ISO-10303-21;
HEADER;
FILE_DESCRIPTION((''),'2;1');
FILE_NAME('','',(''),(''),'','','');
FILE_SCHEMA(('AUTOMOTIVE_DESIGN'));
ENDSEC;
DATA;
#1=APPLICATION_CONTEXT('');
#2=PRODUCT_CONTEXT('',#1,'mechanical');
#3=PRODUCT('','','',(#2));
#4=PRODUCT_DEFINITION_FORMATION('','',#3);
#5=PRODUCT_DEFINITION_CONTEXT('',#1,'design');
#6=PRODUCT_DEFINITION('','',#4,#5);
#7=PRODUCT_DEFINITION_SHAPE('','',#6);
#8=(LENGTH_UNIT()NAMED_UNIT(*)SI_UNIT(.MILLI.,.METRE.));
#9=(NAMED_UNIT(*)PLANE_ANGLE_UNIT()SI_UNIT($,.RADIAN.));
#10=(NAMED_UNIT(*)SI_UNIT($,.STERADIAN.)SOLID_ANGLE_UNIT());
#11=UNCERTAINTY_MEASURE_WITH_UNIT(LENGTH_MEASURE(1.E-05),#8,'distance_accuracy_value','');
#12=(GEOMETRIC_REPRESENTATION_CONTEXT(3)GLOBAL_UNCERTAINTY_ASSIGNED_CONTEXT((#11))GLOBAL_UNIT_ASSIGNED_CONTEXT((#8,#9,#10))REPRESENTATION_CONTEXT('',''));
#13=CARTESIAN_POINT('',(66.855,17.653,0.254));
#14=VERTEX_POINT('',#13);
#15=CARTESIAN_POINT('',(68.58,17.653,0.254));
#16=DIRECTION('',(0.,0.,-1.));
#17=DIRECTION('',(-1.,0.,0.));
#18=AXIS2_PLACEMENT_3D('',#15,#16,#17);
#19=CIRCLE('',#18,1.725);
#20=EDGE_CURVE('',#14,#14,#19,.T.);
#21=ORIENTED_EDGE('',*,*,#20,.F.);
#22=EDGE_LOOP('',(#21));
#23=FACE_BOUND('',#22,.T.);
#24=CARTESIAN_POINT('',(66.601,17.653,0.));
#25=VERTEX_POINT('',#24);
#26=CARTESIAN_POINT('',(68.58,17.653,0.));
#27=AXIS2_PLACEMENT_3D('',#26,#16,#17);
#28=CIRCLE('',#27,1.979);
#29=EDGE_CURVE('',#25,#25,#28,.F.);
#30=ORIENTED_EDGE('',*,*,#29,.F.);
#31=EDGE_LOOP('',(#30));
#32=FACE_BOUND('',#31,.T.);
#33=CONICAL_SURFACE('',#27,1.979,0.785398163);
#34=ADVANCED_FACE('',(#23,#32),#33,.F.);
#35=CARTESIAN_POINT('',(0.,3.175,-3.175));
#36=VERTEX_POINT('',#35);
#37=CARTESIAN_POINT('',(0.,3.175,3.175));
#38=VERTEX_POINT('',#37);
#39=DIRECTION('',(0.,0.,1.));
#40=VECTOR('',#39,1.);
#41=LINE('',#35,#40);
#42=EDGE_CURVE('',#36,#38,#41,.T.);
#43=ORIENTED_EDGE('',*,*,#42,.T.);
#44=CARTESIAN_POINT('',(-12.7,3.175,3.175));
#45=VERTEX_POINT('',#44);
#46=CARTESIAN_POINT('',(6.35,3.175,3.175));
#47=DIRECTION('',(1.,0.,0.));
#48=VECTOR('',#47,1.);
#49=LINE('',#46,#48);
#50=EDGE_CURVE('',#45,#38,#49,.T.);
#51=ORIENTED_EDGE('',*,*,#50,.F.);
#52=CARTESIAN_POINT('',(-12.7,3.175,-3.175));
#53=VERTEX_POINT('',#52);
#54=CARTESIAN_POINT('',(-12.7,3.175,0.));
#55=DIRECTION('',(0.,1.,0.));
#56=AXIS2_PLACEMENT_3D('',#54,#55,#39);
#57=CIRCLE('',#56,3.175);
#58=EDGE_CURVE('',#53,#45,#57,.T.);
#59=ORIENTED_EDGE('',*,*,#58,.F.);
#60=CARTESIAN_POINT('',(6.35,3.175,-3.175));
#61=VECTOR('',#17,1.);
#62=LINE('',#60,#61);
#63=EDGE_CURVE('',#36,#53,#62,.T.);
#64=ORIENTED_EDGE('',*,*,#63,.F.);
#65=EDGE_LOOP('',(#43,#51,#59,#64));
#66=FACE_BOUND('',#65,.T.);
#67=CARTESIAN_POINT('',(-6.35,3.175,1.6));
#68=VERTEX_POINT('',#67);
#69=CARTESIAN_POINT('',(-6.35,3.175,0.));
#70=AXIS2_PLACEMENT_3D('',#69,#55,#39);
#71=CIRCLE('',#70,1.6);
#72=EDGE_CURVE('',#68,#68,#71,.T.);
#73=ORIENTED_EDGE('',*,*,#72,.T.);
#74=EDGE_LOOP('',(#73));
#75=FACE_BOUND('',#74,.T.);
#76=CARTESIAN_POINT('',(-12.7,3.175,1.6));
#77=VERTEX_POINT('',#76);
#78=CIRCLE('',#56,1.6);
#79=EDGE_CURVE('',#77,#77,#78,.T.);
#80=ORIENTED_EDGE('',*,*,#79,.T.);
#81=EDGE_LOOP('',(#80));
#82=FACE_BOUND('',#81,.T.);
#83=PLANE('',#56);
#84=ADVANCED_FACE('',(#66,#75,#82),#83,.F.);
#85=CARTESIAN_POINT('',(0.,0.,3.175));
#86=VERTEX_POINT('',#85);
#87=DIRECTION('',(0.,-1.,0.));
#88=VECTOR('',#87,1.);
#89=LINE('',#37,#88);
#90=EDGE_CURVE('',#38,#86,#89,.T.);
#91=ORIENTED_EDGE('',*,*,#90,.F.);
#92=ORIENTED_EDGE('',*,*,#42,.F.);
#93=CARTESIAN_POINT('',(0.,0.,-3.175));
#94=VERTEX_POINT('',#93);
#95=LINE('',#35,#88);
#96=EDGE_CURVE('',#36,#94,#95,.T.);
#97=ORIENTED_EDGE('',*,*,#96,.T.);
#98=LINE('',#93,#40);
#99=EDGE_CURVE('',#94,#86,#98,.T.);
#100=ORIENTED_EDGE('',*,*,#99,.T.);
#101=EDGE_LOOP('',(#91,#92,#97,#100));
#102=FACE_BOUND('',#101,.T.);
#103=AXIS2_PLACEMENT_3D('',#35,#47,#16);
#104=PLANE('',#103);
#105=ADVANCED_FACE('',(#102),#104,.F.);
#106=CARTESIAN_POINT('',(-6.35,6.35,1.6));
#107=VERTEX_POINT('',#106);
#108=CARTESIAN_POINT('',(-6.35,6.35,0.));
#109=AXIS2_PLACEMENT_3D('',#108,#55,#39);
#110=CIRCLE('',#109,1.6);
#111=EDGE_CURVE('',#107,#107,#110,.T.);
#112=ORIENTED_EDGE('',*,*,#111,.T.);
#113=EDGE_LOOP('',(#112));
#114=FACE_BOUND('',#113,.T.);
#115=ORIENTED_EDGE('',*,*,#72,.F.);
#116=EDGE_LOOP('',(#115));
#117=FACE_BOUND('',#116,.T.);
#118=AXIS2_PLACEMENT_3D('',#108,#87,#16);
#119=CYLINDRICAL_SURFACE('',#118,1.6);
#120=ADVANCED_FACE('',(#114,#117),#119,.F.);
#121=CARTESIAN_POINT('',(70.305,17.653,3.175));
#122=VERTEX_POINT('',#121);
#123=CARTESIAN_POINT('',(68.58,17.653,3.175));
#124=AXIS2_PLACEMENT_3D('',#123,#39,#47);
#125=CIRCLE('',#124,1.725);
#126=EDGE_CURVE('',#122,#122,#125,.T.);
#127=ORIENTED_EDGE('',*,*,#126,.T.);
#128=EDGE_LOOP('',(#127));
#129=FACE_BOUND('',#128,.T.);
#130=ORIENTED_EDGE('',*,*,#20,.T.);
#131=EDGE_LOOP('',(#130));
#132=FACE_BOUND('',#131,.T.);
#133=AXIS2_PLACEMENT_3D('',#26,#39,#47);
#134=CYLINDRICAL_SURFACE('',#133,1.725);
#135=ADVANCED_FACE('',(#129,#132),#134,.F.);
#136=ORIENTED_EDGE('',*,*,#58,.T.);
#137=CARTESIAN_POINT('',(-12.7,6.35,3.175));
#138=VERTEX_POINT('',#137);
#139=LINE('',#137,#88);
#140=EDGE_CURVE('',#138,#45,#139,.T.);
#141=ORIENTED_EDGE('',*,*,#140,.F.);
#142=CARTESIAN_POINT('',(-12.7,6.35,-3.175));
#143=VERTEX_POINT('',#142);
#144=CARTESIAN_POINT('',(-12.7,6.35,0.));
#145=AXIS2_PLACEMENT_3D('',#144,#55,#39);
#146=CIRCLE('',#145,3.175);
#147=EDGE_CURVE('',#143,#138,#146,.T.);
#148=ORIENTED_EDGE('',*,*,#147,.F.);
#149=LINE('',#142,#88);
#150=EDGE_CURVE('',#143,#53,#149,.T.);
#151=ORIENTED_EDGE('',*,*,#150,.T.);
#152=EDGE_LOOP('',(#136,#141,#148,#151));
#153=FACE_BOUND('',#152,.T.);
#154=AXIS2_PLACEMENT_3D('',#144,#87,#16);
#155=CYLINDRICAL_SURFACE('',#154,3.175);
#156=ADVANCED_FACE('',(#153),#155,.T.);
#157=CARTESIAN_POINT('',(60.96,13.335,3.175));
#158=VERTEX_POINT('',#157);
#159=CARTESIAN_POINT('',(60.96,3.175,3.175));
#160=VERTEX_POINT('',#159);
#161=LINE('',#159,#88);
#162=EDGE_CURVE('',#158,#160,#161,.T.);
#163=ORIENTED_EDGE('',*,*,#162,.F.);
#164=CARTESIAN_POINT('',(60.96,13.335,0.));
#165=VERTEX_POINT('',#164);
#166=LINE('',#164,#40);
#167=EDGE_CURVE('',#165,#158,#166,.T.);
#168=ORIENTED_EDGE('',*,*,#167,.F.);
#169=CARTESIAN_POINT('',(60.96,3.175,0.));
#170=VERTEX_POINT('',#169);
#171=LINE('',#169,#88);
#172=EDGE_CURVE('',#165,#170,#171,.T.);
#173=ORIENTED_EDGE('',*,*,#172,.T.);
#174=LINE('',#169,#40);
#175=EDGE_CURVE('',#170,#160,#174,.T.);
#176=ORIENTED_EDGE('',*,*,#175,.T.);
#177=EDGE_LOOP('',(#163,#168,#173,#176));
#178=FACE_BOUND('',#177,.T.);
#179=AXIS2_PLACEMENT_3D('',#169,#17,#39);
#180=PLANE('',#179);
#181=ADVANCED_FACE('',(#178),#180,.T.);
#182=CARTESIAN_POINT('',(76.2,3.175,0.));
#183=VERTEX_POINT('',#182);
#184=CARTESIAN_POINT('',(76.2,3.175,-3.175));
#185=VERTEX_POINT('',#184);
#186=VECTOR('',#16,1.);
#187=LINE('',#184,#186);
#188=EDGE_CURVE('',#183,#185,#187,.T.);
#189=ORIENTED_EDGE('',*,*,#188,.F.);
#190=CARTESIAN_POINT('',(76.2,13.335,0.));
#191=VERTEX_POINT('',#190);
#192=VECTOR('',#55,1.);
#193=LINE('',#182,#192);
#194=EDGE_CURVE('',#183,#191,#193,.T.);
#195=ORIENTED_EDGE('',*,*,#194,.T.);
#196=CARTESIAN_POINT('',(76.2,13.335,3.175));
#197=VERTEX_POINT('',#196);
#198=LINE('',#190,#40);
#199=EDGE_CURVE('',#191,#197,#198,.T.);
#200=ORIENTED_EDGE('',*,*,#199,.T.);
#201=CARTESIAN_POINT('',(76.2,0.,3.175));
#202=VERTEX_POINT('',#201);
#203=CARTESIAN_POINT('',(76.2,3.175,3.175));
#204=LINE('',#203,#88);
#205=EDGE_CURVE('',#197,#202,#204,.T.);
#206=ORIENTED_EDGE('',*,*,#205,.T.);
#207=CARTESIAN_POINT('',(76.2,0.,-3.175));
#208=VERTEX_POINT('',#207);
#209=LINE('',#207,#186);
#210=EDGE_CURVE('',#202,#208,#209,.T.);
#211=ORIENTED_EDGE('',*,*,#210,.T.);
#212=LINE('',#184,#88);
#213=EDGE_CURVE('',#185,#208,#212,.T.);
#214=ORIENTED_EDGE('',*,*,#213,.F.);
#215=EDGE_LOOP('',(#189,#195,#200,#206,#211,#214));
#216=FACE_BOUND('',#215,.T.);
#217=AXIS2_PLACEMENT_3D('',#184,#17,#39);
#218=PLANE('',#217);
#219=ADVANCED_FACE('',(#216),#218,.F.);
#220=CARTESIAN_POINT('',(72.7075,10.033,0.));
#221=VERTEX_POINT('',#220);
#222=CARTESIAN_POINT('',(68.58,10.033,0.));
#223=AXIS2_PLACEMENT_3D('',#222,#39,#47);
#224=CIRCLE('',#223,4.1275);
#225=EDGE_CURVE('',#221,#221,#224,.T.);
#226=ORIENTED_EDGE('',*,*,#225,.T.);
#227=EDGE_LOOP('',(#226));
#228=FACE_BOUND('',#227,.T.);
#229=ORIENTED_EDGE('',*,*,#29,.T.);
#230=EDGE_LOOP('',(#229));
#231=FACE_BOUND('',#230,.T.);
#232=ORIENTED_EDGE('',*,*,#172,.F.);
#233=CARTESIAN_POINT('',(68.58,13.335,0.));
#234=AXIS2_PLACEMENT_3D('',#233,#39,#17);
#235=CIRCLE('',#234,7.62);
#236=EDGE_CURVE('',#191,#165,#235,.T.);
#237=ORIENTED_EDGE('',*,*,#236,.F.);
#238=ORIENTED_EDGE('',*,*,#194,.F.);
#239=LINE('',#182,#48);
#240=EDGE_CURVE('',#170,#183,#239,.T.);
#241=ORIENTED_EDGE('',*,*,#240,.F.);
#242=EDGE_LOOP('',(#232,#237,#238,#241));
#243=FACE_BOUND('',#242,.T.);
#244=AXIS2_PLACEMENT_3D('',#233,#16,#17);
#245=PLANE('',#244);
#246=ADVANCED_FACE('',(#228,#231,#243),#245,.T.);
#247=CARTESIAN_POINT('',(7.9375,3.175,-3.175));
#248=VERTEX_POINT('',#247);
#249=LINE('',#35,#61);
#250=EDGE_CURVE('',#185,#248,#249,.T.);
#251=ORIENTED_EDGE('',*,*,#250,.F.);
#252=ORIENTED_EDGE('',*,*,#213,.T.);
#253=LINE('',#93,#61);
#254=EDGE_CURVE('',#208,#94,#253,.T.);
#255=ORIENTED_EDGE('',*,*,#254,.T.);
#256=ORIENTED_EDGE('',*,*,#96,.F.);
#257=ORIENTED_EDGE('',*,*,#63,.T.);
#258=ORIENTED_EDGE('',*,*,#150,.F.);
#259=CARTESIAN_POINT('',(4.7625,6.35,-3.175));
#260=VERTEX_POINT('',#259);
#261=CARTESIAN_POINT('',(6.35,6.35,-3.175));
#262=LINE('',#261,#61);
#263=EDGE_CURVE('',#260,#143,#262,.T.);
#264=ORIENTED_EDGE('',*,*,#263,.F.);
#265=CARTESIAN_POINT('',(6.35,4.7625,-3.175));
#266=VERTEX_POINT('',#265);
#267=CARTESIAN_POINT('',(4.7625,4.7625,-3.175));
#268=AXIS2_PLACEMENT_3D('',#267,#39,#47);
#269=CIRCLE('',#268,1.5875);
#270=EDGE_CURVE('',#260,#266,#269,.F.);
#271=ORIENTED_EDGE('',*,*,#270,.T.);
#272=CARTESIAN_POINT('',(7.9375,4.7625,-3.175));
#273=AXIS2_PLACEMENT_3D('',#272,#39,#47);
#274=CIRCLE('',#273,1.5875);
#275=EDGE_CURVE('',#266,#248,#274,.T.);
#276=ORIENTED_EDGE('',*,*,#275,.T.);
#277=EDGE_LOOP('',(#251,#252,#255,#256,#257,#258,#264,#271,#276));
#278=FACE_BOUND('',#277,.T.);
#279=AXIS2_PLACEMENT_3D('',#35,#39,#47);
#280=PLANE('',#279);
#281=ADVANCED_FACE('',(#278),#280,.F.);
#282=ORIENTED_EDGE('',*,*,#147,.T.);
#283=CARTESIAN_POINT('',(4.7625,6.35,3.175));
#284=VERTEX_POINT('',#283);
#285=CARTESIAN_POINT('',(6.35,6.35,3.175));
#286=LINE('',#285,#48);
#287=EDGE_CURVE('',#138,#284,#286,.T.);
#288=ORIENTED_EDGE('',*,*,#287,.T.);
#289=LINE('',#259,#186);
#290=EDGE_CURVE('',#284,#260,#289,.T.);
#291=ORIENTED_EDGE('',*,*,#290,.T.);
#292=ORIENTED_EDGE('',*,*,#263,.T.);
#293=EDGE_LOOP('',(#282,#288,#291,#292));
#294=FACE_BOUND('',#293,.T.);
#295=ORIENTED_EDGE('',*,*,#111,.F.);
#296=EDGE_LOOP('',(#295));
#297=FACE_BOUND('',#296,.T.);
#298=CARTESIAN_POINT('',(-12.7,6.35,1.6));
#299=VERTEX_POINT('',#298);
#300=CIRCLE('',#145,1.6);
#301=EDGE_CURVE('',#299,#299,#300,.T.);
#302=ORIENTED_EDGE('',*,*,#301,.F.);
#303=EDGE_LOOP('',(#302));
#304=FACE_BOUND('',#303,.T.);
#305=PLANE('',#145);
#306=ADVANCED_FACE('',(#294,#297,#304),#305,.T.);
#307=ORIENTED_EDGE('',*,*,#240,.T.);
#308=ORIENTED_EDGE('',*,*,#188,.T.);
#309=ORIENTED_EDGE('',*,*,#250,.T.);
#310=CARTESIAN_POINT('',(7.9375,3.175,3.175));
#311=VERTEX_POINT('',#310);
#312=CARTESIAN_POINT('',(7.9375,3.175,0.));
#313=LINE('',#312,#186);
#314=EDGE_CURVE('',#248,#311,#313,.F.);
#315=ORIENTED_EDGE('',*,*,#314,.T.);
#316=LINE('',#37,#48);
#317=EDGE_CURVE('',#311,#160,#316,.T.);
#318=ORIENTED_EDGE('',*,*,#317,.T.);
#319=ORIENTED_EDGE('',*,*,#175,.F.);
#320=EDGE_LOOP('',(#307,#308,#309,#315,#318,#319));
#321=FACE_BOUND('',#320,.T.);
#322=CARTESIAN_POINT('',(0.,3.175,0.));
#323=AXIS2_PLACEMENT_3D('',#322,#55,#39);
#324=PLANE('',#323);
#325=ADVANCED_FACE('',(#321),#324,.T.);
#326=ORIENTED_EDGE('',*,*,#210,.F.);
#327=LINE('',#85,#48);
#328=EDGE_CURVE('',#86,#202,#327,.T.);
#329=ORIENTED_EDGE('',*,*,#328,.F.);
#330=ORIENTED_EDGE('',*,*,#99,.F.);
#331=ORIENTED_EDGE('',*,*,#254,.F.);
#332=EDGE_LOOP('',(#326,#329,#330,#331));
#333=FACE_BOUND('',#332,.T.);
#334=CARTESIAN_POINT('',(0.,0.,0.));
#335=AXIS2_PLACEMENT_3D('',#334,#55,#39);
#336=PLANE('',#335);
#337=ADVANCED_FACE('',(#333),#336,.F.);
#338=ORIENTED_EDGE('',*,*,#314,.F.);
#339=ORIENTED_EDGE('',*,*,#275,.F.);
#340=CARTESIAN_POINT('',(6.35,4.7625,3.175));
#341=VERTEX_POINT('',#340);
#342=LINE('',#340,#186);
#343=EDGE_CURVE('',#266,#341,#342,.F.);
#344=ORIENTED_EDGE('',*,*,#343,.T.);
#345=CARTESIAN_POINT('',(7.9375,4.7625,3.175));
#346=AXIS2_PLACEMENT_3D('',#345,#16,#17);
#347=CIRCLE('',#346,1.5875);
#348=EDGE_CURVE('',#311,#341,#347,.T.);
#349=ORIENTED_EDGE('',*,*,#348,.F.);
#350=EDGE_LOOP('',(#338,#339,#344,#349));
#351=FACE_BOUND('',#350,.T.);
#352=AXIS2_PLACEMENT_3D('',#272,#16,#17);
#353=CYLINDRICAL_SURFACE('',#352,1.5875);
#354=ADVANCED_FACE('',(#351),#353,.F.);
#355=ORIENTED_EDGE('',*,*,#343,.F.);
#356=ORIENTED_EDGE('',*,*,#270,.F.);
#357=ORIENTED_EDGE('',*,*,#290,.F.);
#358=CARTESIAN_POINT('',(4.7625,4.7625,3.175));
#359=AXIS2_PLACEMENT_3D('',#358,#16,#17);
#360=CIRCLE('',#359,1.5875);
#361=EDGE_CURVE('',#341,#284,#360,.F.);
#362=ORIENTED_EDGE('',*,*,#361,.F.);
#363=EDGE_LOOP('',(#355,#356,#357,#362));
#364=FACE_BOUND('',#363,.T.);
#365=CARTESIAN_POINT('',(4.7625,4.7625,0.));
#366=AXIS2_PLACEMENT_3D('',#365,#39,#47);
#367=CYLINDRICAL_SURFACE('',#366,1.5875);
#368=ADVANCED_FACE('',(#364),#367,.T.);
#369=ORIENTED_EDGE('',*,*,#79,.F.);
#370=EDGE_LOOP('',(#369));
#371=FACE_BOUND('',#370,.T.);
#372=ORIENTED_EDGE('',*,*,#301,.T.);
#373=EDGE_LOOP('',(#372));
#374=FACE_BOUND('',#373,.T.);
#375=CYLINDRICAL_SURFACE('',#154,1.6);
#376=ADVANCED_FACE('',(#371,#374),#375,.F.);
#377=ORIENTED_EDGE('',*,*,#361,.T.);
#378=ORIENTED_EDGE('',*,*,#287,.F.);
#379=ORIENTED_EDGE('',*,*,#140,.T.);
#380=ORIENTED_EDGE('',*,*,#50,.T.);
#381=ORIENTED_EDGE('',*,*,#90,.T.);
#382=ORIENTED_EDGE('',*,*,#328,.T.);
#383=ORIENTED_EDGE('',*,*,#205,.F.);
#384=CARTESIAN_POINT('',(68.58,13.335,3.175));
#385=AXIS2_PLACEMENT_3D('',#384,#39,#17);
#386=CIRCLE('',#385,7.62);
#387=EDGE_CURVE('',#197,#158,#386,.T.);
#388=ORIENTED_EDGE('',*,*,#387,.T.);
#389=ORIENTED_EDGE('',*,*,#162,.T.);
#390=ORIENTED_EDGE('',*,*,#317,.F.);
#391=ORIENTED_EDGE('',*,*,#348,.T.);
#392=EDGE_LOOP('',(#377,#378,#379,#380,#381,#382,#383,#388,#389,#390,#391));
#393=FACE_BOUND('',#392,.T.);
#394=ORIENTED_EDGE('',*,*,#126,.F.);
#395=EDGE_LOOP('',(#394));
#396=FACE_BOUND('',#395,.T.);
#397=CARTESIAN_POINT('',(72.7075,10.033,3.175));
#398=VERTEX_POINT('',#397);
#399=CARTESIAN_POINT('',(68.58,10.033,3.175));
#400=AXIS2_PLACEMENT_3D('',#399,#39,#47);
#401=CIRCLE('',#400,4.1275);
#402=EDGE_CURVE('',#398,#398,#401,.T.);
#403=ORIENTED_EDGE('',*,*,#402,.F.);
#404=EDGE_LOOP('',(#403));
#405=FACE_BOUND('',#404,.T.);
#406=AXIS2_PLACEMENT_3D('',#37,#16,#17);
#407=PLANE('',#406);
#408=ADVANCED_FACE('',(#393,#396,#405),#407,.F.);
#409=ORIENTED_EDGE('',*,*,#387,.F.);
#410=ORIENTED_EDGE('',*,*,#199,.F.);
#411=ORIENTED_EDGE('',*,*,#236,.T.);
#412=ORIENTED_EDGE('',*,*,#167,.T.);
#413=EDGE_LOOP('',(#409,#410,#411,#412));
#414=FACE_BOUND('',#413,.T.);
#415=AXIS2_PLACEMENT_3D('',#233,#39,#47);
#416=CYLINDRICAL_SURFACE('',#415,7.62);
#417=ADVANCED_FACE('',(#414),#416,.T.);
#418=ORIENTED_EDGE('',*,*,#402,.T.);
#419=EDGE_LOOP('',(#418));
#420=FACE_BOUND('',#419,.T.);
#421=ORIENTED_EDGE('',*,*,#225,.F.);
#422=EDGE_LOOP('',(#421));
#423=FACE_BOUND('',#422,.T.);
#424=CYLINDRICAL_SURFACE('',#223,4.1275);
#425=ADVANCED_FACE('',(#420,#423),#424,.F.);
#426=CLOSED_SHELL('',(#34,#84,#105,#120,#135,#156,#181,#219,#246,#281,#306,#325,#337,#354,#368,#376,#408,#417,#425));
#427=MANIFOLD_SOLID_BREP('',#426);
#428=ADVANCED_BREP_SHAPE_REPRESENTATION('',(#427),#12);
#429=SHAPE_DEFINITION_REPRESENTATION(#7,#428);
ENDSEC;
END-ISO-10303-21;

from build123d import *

# Parameters (mm, degrees)
SKETCH2_W           = 76.2
SKETCH2_H           = 6.35
BOSS_EXTRUDE1_DEPTH = 3.175
SKETCH3_R           = 1.6
BOSS_EXTRUDE2_DEPTH = 3.175
FILLET1_START       = -4
FILLET1_DEPTH       = 8
FILLET1_START_2     = -3.175
FILLET1_2_DEPTH     = 6.35
SKETCH6_R           = 4.1275
SKETCH6_R_2         = 1.725
BOSS_EXTRUDE4_DEPTH = 3.175
CHAMFER2_SIZE       = 0.254


with BuildPart() as part:
    # Sketch2 → Boss-Extrude1 (new body)
    with BuildSketch(Plane(origin=(0, 0, 0), x_dir=(1, 0, 0), z_dir=(0, 1, 0))):
        with Locations((38.1, 0)):
            Rectangle(SKETCH2_W, SKETCH2_H)
    extrude(amount=BOSS_EXTRUDE1_DEPTH)

    # Sketch3 → Boss-Extrude2 (add)
    with BuildSketch(Plane(origin=(0, 3.175, 0), x_dir=(1, 0, 0), z_dir=(0, 1, 0))):
        with BuildLine():
            Line((6.35, 3.175), (-12.7, 3.175))
            ThreePointArc((-12.7, 3.175), (-15.875, 0), (-12.7, -3.175))
            Line((-12.7, -3.175), (6.35, -3.175))
            Line((6.35, -3.175), (6.35, 3.175))
        make_face()
        with Locations(Location((-12.7, 0, 0), (0, 0, 270))):
            Circle(SKETCH3_R, mode=Mode.SUBTRACT)
        with Locations(Location((-6.35, 0, 0), (0, 0, 270))):
            Circle(SKETCH3_R, mode=Mode.SUBTRACT)
    extrude(amount=BOSS_EXTRUDE2_DEPTH)

    # Fillet1: read off the stored shape, not the designer's step
    # Fillet1 outline → Fillet1 (cut)
    with BuildSketch(Plane.XY.offset(FILLET1_START)):
        with BuildLine():
            ThreePointArc((4.7625, 6.35), (5.885032015, 5.885032015), (6.35, 4.7625))
            Line((6.35, 4.7625), (6.35, 6.35))
            Line((6.35, 6.35), (4.7625, 6.35))
        make_face()
    extrude(amount=FILLET1_DEPTH, mode=Mode.SUBTRACT)

    # Fillet1 2 outline → Fillet1 2 (add)
    with BuildSketch(Plane.XY.offset(FILLET1_START_2)):
        with BuildLine():
            ThreePointArc((7.9375, 3.175), (6.814967985, 3.639967985), (6.35, 4.7625))
            Line((6.35, 4.7625), (6.35, 3.175))
            Line((6.35, 3.175), (7.9375, 3.175))
        make_face()
    extrude(amount=FILLET1_2_DEPTH)

    # Sketch6 → Boss-Extrude4 (add)
    with BuildSketch(Plane.XY.offset(3.175)):
        with BuildLine():
            Line((76.2, 3.175), (60.96, 3.175))
            Line((60.96, 3.175), (60.96, 13.335))
            ThreePointArc((60.96, 13.335), (68.58, 20.955), (76.2, 13.335))
            Line((76.2, 13.335), (76.2, 3.175))
        make_face()
        with Locations((68.58, 10.033)):
            Circle(SKETCH6_R, mode=Mode.SUBTRACT)
        with Locations((68.58, 17.653)):
            Circle(SKETCH6_R_2, mode=Mode.SUBTRACT)
    extrude(amount=-BOSS_EXTRUDE4_DEPTH)

    # Chamfer2
    chamfer2_edges = [part.edges().sort_by_distance(p)[0] for p in [
        (66.855, 17.653, 0),
    ]]
    chamfer(chamfer2_edges, length=CHAMFER2_SIZE)


solid = part.part
